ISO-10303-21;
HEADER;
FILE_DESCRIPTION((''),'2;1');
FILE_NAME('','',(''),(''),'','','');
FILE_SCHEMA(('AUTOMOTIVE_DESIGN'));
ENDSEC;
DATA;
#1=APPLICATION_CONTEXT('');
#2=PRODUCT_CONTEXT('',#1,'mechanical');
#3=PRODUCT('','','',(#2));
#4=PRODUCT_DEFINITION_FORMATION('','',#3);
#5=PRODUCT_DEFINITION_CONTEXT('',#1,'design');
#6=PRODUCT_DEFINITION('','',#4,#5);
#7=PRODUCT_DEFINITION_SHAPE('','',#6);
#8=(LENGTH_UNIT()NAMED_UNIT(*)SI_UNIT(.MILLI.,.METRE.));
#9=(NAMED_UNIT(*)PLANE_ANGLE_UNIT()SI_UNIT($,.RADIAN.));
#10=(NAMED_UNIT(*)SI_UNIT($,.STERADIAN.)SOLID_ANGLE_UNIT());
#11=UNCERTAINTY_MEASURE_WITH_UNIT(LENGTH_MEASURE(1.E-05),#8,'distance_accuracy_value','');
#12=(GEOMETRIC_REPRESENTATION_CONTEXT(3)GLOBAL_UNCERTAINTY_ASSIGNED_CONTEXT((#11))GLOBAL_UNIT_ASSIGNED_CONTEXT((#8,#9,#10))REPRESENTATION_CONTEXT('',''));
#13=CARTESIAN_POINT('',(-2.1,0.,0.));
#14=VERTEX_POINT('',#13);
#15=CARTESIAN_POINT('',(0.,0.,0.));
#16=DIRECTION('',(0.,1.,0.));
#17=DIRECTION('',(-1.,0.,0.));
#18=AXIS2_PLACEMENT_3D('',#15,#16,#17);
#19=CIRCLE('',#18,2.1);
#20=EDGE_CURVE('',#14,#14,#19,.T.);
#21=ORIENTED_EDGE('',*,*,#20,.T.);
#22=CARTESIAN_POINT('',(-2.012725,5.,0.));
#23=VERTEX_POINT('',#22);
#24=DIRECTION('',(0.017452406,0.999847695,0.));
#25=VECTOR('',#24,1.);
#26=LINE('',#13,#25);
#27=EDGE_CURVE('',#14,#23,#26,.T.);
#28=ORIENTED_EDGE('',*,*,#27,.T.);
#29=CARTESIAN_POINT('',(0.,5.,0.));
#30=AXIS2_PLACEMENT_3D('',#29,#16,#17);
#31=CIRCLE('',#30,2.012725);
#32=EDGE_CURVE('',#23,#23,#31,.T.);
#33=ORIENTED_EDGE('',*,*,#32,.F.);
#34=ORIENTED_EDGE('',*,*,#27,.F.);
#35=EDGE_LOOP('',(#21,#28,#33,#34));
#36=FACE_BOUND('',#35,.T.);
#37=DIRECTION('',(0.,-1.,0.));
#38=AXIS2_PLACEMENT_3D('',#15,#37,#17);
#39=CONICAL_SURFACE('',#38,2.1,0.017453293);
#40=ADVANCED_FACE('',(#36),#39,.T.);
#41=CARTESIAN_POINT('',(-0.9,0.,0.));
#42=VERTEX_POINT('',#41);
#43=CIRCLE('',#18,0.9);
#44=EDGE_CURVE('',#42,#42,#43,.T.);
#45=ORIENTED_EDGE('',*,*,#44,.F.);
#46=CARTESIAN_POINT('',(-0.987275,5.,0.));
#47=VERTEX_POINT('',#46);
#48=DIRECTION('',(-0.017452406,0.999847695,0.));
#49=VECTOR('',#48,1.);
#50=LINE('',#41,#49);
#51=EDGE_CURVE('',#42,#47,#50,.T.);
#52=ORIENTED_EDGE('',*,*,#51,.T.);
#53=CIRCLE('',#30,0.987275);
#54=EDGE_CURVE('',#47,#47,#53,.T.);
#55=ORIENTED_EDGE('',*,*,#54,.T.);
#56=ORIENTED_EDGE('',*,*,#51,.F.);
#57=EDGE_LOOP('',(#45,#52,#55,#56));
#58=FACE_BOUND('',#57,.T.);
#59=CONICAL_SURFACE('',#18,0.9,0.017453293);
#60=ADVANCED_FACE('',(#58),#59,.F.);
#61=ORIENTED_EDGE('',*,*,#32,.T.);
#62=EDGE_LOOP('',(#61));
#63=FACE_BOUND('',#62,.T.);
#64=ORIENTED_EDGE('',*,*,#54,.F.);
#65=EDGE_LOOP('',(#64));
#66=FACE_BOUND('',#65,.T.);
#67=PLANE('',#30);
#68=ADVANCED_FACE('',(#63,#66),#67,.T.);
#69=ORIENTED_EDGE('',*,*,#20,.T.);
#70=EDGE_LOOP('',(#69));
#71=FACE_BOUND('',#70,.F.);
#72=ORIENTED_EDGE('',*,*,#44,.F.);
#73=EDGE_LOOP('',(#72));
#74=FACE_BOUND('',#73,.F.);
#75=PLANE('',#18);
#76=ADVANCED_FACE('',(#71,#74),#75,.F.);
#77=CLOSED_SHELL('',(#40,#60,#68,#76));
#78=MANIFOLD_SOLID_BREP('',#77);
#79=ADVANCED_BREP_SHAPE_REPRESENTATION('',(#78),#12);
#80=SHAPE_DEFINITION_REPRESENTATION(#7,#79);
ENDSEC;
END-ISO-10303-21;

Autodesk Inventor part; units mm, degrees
ref_plane "YZ Plane" through (0, 0, 0) normal (1, 0, 0) x (0, 1, 0)
ref_plane "XZ Plane" through (0, 0, 0) normal (0, 1, 0) x (-1, 0, 0)
ref_plane "XY Plane" through (0, 0, 0) normal (0, 0, 1) x (1, 0, 0)
sketch "Skizze1" plane through (0, 0, 0) normal (0, 1, 0) x (-1, 0, 0)
  circle A0 centre (0, 0) radius 0.9
  circle A1 centre (0, 0) radius 2.1
  dimension "d0" = 1.8
  dimension "d1" = 4.2
extrude "Extrusion1" add sketch "Skizze1" along normal blind 5 draft -1
properties part number "20_FEPTube_Motor_Clutch_1"
